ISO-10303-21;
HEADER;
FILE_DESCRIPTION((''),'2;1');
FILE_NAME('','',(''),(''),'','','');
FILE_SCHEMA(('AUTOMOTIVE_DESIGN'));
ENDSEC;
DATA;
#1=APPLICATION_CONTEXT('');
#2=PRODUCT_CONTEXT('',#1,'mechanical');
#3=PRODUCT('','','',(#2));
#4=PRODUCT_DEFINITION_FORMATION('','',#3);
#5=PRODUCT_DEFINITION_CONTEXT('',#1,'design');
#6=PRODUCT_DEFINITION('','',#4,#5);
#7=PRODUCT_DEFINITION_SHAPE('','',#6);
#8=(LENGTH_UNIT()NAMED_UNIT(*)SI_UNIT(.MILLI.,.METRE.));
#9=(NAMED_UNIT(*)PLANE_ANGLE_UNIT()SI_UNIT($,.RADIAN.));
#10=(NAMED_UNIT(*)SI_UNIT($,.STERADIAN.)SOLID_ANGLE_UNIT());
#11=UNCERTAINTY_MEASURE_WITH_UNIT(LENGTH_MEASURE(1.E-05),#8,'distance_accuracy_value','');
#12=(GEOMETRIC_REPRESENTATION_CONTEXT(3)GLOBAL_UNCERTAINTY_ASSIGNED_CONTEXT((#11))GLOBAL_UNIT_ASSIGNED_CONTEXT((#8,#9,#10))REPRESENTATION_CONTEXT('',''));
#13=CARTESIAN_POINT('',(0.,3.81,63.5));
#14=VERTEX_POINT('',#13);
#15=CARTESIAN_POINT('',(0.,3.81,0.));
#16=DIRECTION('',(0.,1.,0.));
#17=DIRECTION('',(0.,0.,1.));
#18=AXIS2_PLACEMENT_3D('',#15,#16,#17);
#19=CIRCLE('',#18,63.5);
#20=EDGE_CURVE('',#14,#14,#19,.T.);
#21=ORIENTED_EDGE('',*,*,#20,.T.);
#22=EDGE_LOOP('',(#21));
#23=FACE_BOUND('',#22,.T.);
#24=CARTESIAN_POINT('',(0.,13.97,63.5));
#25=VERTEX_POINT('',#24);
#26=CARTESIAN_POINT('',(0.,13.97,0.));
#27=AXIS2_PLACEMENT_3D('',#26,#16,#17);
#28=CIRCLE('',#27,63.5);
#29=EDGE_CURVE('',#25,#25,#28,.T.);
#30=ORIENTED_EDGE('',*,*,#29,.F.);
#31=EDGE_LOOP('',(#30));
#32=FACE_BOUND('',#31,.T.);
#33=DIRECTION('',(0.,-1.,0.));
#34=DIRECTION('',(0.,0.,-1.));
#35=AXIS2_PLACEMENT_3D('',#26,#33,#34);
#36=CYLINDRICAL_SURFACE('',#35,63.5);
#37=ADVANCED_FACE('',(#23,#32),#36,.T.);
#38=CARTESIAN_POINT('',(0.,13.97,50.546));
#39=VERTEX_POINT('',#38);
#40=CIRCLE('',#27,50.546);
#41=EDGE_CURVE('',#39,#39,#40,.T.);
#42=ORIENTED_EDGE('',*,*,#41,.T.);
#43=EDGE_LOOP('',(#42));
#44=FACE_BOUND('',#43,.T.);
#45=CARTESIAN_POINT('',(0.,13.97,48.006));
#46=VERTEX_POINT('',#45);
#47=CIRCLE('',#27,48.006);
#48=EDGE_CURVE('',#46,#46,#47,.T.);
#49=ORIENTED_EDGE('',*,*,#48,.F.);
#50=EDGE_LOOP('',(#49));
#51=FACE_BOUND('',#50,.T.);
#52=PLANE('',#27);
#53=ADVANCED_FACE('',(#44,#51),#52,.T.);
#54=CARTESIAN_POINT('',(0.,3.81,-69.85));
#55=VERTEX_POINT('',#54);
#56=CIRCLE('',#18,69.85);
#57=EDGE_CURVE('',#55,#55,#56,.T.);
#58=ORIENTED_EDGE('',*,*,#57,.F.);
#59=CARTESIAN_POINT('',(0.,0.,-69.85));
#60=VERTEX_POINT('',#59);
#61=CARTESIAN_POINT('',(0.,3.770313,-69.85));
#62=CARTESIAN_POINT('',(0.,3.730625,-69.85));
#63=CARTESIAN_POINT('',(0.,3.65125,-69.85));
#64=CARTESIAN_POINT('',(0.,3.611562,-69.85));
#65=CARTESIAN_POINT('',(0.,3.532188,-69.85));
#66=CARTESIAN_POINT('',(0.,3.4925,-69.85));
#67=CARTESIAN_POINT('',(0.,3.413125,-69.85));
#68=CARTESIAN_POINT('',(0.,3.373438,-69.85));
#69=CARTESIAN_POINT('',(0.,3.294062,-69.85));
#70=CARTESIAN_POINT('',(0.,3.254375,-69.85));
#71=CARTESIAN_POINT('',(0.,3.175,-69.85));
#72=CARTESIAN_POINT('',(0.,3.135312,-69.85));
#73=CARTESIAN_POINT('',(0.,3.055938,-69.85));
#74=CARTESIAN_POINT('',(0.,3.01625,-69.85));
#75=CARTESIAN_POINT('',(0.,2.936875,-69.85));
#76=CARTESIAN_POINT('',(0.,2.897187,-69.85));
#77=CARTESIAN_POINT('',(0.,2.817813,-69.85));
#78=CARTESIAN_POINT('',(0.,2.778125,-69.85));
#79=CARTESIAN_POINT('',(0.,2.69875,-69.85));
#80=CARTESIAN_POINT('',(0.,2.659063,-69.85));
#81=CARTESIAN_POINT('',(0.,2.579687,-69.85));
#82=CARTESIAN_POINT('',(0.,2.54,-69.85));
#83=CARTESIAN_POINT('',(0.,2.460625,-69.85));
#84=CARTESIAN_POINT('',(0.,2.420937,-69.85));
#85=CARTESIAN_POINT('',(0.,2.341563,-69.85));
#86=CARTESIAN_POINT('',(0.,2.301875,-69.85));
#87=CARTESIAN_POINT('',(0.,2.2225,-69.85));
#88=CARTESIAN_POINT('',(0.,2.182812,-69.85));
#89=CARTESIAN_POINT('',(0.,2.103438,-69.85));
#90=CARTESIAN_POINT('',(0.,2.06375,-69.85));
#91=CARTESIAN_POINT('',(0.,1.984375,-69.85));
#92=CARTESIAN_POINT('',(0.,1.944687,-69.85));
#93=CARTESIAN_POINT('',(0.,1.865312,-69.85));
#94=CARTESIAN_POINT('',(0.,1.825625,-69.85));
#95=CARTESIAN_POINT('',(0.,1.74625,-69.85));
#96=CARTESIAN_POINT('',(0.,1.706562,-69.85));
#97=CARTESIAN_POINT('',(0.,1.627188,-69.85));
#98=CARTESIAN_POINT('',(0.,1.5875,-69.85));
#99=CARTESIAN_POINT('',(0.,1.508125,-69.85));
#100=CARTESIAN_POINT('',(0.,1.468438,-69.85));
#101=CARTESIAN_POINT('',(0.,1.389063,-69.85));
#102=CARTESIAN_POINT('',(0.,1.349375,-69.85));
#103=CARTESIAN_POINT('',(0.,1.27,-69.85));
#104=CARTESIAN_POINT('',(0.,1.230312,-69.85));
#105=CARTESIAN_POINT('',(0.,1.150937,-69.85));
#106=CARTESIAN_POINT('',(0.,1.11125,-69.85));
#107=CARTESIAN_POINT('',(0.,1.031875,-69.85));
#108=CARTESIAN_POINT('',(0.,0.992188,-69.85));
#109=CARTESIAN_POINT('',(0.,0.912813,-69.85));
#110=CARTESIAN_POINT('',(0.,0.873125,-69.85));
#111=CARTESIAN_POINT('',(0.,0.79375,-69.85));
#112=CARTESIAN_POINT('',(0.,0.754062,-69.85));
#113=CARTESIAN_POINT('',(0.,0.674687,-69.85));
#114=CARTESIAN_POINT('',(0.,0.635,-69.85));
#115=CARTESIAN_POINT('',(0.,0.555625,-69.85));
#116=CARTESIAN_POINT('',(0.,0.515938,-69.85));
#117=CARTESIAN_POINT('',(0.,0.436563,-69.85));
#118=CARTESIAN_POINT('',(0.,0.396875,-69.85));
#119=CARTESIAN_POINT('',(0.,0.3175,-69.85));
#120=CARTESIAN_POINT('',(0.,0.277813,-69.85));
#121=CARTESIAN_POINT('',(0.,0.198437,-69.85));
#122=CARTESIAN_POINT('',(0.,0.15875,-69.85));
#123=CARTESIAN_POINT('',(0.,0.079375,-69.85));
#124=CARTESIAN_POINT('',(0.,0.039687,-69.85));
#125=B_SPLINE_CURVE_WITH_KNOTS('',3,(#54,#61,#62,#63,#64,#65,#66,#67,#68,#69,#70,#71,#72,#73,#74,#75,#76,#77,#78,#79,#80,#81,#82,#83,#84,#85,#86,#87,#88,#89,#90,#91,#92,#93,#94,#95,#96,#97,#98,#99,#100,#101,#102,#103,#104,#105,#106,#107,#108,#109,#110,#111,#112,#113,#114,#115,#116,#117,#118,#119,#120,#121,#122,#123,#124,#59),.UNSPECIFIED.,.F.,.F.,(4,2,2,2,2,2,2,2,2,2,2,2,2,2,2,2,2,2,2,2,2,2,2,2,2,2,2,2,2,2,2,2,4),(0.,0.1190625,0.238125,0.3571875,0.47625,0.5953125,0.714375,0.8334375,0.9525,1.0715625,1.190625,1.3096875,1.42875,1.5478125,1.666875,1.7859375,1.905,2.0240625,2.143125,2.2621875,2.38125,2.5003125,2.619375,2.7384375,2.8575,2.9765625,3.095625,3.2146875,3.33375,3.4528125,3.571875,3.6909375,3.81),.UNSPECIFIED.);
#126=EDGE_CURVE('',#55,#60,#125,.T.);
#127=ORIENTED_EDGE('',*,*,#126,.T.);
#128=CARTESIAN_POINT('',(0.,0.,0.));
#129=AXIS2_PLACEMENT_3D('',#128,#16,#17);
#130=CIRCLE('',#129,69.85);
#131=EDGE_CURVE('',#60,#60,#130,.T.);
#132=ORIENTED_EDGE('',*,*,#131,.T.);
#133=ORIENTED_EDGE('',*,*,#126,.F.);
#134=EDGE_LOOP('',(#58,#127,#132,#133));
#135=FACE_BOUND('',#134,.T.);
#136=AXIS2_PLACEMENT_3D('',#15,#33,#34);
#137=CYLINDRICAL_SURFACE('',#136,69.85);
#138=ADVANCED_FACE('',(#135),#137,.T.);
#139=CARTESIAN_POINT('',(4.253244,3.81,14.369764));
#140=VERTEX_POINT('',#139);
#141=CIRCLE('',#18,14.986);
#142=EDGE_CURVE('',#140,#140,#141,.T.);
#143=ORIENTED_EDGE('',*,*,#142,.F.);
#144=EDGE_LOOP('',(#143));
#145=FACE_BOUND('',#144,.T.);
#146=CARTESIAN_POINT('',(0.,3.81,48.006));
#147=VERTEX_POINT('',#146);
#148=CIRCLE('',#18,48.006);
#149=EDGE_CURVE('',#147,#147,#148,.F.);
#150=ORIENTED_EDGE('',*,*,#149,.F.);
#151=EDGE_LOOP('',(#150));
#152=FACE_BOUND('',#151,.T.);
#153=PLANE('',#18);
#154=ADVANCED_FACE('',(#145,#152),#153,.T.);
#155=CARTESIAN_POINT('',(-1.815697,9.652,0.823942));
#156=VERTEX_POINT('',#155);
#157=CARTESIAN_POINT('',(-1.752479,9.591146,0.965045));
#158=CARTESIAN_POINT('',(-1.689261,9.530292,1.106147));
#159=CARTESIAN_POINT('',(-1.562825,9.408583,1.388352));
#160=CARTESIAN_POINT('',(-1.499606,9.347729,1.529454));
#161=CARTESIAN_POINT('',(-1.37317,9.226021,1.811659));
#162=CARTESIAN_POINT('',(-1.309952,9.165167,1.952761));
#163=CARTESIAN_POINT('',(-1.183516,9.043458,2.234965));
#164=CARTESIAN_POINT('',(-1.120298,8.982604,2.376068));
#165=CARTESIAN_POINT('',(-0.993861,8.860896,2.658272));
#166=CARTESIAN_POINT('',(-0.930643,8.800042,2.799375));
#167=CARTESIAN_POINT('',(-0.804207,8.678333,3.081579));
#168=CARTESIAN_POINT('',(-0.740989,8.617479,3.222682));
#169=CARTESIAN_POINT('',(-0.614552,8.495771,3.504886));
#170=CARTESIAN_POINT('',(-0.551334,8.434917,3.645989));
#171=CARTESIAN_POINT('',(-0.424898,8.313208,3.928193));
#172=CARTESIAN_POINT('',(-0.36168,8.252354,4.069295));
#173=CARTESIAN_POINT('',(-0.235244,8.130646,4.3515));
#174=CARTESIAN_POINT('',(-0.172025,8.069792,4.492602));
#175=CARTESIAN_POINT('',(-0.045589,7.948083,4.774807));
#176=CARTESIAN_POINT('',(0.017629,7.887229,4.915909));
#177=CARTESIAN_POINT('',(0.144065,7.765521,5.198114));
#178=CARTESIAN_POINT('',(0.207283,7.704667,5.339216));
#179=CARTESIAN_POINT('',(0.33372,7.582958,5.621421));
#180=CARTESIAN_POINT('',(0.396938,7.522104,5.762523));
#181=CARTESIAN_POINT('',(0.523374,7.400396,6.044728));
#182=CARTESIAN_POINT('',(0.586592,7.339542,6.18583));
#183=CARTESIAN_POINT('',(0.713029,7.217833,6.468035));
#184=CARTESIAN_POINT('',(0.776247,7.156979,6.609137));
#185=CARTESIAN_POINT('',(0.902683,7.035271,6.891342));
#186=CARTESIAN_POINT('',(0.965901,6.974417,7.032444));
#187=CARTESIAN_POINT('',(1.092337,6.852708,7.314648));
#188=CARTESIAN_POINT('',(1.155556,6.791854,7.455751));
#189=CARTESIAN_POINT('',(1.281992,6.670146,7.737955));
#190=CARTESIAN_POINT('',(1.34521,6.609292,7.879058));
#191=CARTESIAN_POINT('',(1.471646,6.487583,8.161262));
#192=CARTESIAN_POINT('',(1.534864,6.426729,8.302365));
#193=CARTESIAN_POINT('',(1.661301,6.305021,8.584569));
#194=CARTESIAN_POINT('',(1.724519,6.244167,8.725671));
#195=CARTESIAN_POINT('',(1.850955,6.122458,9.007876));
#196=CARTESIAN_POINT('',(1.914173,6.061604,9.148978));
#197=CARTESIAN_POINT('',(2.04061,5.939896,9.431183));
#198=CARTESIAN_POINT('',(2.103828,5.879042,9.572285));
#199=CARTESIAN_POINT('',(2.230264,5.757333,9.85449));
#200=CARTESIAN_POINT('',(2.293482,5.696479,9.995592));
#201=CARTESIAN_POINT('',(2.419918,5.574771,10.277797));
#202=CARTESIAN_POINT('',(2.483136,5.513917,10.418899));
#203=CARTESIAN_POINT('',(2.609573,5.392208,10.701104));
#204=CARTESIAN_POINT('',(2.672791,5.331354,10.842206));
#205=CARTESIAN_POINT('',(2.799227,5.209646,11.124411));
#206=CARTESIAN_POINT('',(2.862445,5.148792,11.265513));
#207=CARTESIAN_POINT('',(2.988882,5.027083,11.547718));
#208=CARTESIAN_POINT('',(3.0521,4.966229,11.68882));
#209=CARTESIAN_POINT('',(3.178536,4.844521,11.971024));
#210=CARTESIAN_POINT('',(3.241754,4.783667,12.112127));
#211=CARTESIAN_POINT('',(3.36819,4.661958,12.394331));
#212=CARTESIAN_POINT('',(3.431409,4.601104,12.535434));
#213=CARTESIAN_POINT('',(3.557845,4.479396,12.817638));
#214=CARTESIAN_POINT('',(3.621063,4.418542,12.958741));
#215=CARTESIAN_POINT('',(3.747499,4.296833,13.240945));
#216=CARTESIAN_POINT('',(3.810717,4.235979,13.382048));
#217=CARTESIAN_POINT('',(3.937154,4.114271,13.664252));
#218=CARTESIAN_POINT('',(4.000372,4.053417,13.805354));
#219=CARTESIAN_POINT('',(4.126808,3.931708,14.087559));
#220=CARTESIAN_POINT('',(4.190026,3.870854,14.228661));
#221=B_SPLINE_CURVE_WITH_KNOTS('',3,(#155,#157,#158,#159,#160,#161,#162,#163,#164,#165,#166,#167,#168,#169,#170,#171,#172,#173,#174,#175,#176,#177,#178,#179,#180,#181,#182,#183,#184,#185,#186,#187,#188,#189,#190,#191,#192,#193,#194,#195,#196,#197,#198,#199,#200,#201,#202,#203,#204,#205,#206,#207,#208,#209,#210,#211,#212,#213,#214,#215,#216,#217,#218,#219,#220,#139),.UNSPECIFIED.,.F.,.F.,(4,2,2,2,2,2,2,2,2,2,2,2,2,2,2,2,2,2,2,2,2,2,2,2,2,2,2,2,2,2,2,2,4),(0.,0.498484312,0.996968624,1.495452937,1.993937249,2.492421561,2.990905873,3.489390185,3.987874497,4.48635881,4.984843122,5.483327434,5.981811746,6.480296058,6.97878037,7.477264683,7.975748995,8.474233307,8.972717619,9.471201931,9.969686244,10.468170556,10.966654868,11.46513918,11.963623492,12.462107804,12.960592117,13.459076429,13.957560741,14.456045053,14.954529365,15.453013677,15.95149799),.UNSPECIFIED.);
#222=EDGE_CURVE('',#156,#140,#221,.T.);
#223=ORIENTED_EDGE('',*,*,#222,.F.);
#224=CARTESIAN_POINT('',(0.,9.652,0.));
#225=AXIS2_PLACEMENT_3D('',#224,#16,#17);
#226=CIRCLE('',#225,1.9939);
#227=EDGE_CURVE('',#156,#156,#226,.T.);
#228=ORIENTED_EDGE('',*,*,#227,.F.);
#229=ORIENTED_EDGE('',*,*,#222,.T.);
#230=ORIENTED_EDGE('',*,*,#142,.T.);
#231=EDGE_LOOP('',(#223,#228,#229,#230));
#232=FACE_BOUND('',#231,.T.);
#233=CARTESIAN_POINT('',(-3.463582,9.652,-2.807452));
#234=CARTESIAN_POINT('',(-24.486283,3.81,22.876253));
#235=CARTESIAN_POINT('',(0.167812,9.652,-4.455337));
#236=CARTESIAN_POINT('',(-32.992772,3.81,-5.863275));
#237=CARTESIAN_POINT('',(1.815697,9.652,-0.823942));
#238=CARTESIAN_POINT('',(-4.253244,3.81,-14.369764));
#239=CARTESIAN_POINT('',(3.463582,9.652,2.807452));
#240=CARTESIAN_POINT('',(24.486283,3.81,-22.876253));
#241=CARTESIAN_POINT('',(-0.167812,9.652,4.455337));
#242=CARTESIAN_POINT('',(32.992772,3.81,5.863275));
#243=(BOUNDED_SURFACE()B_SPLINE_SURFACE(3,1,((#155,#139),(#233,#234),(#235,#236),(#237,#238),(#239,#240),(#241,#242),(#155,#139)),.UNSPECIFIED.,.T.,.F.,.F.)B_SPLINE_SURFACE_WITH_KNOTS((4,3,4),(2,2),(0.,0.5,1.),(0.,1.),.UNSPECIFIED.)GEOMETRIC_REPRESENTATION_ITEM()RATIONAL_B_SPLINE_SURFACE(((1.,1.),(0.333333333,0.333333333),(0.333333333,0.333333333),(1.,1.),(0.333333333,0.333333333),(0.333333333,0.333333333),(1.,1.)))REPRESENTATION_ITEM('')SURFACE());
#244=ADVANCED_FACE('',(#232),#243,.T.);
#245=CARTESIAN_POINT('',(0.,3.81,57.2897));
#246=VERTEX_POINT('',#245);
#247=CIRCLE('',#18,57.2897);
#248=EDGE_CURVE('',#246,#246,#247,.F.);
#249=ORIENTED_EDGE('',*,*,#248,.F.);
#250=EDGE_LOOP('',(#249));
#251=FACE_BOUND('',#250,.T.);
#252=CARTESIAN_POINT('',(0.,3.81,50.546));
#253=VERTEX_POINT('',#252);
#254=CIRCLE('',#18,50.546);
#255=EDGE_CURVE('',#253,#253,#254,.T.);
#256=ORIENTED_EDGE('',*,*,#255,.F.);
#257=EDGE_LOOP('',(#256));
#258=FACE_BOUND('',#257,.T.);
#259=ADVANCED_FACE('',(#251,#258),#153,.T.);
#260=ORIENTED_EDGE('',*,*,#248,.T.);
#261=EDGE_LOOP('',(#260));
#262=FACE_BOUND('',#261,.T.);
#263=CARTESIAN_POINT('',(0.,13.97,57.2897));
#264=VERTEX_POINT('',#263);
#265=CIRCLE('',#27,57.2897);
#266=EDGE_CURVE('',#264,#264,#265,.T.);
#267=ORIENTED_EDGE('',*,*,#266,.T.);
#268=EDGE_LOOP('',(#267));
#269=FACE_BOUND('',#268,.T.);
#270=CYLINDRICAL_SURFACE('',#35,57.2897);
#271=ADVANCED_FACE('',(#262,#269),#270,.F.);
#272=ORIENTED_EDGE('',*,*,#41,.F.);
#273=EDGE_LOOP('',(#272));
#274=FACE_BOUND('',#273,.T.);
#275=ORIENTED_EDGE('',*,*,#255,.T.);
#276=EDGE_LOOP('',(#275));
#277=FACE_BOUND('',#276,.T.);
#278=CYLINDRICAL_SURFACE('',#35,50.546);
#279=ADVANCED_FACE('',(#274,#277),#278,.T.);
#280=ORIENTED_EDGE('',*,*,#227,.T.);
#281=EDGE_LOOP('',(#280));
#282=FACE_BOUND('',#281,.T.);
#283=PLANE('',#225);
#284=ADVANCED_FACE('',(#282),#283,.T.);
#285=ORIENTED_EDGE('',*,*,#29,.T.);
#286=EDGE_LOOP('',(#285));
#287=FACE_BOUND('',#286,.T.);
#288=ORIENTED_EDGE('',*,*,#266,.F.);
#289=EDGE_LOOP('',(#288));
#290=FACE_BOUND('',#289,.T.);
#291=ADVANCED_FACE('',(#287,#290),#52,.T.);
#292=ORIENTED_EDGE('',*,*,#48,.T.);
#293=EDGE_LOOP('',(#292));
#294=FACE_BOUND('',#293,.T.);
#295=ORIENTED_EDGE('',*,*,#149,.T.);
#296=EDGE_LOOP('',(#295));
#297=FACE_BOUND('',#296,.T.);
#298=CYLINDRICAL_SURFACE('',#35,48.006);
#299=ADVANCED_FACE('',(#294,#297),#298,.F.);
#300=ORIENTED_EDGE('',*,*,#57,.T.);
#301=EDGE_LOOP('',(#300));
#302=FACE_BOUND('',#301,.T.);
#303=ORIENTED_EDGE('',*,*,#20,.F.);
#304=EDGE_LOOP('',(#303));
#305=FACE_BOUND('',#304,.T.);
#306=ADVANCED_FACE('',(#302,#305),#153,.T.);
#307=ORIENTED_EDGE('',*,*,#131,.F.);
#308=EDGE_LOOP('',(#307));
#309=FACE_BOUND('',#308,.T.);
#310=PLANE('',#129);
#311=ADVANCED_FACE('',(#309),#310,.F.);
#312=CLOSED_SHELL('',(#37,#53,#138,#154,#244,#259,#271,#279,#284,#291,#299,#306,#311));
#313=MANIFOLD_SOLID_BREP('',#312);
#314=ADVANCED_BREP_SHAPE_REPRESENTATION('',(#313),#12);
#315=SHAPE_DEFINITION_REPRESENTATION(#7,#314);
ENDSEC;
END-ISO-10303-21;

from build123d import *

# Parameters (mm, degrees)
SKETCH1_R           = 69.85
BOSS_EXTRUDE1_DEPTH = 3.81
SKETCH2_R           = 63.5
SKETCH2_R_2         = 57.2897
BOSS_EXTRUDE2_DEPTH = 10.16
SKETCH3_R           = 50.546
SKETCH3_R_2         = 48.006
BOSS_EXTRUDE3_DEPTH = 10.16


with BuildPart() as part:
    # Sketch1 → Boss-Extrude1 (new body)
    with BuildSketch(Plane(origin=(0, 0, 0), x_dir=(1, 0, 0), z_dir=(0, 1, 0))):
        with Locations(Location((0, 0, 0), (0, 0, 90))):
            Circle(SKETCH1_R)
    extrude(amount=BOSS_EXTRUDE1_DEPTH)

    # Sketch2 → Boss-Extrude2 (add)
    with BuildSketch(Plane(origin=(0, 3.81, 0), x_dir=(1, 0, 0), z_dir=(0, 1, 0))):
        with Locations(Location((0, 0, 0), (0, 0, 270))):
            Circle(SKETCH2_R)
        with Locations(Location((0, 0, 0), (0, 0, 270))):
            Circle(SKETCH2_R_2, mode=Mode.SUBTRACT)
    extrude(amount=BOSS_EXTRUDE2_DEPTH)

    # Sketch3 → Boss-Extrude3 (add)
    with BuildSketch(Plane(origin=(0, 3.81, 0), x_dir=(1, 0, 0), z_dir=(0, 1, 0))):
        with Locations(Location((0, 0, 0), (0, 0, 270))):
            Circle(SKETCH3_R)
        with Locations(Location((0, 0, 0), (0, 0, 270))):
            Circle(SKETCH3_R_2, mode=Mode.SUBTRACT)
    extrude(amount=BOSS_EXTRUDE3_DEPTH)

    # Loft1: read off the stored shape, not the designer's step
    # Loft1: loft between two sections, ruled curve by curve
    loft1_from = [
        Edge.make_bspline([(-1.815697125, 9.652, 0.82394245), (-3.463582025, 9.652, -2.8074518), (0.167812225, 9.652, -4.4553367), (1.815697125, 9.652, -0.82394245), (3.463582025, 9.652, 2.8074518), (-0.167812225, 9.652, 4.4553367), (-1.815697125, 9.652, 0.82394245)], [0, 0, 0, 0, 0.5, 0.5, 0.5, 1, 1, 1, 1], 3, [1, 0.333333333, 0.333333333, 1, 0.333333333, 0.333333333, 1]),
    ]
    loft1_to = [
        Edge.make_bspline([(4.253244453, 3.81, 14.369763659), (-24.486282866, 3.81, 22.876252565), (-32.992771771, 3.81, -5.863274754), (-4.253244453, 3.81, -14.369763659), (24.486282866, 3.81, -22.876252565), (32.992771771, 3.81, 5.863274754), (4.253244453, 3.81, 14.369763659)], [0, 0, 0, 0, 0.5, 0.5, 0.5, 1, 1, 1, 1], 3, [1, 0.333333333, 0.333333333, 1, 0.333333333, 0.333333333, 1]),
    ]
    loft1 = Solid(Shell([*[Face.make_surface_from_curves(loft1_from[k], loft1_to[k]) for k in range(1)], Face(Wire(loft1_from)), Face(Wire(loft1_to))]))
    add(loft1)


solid = part.part
